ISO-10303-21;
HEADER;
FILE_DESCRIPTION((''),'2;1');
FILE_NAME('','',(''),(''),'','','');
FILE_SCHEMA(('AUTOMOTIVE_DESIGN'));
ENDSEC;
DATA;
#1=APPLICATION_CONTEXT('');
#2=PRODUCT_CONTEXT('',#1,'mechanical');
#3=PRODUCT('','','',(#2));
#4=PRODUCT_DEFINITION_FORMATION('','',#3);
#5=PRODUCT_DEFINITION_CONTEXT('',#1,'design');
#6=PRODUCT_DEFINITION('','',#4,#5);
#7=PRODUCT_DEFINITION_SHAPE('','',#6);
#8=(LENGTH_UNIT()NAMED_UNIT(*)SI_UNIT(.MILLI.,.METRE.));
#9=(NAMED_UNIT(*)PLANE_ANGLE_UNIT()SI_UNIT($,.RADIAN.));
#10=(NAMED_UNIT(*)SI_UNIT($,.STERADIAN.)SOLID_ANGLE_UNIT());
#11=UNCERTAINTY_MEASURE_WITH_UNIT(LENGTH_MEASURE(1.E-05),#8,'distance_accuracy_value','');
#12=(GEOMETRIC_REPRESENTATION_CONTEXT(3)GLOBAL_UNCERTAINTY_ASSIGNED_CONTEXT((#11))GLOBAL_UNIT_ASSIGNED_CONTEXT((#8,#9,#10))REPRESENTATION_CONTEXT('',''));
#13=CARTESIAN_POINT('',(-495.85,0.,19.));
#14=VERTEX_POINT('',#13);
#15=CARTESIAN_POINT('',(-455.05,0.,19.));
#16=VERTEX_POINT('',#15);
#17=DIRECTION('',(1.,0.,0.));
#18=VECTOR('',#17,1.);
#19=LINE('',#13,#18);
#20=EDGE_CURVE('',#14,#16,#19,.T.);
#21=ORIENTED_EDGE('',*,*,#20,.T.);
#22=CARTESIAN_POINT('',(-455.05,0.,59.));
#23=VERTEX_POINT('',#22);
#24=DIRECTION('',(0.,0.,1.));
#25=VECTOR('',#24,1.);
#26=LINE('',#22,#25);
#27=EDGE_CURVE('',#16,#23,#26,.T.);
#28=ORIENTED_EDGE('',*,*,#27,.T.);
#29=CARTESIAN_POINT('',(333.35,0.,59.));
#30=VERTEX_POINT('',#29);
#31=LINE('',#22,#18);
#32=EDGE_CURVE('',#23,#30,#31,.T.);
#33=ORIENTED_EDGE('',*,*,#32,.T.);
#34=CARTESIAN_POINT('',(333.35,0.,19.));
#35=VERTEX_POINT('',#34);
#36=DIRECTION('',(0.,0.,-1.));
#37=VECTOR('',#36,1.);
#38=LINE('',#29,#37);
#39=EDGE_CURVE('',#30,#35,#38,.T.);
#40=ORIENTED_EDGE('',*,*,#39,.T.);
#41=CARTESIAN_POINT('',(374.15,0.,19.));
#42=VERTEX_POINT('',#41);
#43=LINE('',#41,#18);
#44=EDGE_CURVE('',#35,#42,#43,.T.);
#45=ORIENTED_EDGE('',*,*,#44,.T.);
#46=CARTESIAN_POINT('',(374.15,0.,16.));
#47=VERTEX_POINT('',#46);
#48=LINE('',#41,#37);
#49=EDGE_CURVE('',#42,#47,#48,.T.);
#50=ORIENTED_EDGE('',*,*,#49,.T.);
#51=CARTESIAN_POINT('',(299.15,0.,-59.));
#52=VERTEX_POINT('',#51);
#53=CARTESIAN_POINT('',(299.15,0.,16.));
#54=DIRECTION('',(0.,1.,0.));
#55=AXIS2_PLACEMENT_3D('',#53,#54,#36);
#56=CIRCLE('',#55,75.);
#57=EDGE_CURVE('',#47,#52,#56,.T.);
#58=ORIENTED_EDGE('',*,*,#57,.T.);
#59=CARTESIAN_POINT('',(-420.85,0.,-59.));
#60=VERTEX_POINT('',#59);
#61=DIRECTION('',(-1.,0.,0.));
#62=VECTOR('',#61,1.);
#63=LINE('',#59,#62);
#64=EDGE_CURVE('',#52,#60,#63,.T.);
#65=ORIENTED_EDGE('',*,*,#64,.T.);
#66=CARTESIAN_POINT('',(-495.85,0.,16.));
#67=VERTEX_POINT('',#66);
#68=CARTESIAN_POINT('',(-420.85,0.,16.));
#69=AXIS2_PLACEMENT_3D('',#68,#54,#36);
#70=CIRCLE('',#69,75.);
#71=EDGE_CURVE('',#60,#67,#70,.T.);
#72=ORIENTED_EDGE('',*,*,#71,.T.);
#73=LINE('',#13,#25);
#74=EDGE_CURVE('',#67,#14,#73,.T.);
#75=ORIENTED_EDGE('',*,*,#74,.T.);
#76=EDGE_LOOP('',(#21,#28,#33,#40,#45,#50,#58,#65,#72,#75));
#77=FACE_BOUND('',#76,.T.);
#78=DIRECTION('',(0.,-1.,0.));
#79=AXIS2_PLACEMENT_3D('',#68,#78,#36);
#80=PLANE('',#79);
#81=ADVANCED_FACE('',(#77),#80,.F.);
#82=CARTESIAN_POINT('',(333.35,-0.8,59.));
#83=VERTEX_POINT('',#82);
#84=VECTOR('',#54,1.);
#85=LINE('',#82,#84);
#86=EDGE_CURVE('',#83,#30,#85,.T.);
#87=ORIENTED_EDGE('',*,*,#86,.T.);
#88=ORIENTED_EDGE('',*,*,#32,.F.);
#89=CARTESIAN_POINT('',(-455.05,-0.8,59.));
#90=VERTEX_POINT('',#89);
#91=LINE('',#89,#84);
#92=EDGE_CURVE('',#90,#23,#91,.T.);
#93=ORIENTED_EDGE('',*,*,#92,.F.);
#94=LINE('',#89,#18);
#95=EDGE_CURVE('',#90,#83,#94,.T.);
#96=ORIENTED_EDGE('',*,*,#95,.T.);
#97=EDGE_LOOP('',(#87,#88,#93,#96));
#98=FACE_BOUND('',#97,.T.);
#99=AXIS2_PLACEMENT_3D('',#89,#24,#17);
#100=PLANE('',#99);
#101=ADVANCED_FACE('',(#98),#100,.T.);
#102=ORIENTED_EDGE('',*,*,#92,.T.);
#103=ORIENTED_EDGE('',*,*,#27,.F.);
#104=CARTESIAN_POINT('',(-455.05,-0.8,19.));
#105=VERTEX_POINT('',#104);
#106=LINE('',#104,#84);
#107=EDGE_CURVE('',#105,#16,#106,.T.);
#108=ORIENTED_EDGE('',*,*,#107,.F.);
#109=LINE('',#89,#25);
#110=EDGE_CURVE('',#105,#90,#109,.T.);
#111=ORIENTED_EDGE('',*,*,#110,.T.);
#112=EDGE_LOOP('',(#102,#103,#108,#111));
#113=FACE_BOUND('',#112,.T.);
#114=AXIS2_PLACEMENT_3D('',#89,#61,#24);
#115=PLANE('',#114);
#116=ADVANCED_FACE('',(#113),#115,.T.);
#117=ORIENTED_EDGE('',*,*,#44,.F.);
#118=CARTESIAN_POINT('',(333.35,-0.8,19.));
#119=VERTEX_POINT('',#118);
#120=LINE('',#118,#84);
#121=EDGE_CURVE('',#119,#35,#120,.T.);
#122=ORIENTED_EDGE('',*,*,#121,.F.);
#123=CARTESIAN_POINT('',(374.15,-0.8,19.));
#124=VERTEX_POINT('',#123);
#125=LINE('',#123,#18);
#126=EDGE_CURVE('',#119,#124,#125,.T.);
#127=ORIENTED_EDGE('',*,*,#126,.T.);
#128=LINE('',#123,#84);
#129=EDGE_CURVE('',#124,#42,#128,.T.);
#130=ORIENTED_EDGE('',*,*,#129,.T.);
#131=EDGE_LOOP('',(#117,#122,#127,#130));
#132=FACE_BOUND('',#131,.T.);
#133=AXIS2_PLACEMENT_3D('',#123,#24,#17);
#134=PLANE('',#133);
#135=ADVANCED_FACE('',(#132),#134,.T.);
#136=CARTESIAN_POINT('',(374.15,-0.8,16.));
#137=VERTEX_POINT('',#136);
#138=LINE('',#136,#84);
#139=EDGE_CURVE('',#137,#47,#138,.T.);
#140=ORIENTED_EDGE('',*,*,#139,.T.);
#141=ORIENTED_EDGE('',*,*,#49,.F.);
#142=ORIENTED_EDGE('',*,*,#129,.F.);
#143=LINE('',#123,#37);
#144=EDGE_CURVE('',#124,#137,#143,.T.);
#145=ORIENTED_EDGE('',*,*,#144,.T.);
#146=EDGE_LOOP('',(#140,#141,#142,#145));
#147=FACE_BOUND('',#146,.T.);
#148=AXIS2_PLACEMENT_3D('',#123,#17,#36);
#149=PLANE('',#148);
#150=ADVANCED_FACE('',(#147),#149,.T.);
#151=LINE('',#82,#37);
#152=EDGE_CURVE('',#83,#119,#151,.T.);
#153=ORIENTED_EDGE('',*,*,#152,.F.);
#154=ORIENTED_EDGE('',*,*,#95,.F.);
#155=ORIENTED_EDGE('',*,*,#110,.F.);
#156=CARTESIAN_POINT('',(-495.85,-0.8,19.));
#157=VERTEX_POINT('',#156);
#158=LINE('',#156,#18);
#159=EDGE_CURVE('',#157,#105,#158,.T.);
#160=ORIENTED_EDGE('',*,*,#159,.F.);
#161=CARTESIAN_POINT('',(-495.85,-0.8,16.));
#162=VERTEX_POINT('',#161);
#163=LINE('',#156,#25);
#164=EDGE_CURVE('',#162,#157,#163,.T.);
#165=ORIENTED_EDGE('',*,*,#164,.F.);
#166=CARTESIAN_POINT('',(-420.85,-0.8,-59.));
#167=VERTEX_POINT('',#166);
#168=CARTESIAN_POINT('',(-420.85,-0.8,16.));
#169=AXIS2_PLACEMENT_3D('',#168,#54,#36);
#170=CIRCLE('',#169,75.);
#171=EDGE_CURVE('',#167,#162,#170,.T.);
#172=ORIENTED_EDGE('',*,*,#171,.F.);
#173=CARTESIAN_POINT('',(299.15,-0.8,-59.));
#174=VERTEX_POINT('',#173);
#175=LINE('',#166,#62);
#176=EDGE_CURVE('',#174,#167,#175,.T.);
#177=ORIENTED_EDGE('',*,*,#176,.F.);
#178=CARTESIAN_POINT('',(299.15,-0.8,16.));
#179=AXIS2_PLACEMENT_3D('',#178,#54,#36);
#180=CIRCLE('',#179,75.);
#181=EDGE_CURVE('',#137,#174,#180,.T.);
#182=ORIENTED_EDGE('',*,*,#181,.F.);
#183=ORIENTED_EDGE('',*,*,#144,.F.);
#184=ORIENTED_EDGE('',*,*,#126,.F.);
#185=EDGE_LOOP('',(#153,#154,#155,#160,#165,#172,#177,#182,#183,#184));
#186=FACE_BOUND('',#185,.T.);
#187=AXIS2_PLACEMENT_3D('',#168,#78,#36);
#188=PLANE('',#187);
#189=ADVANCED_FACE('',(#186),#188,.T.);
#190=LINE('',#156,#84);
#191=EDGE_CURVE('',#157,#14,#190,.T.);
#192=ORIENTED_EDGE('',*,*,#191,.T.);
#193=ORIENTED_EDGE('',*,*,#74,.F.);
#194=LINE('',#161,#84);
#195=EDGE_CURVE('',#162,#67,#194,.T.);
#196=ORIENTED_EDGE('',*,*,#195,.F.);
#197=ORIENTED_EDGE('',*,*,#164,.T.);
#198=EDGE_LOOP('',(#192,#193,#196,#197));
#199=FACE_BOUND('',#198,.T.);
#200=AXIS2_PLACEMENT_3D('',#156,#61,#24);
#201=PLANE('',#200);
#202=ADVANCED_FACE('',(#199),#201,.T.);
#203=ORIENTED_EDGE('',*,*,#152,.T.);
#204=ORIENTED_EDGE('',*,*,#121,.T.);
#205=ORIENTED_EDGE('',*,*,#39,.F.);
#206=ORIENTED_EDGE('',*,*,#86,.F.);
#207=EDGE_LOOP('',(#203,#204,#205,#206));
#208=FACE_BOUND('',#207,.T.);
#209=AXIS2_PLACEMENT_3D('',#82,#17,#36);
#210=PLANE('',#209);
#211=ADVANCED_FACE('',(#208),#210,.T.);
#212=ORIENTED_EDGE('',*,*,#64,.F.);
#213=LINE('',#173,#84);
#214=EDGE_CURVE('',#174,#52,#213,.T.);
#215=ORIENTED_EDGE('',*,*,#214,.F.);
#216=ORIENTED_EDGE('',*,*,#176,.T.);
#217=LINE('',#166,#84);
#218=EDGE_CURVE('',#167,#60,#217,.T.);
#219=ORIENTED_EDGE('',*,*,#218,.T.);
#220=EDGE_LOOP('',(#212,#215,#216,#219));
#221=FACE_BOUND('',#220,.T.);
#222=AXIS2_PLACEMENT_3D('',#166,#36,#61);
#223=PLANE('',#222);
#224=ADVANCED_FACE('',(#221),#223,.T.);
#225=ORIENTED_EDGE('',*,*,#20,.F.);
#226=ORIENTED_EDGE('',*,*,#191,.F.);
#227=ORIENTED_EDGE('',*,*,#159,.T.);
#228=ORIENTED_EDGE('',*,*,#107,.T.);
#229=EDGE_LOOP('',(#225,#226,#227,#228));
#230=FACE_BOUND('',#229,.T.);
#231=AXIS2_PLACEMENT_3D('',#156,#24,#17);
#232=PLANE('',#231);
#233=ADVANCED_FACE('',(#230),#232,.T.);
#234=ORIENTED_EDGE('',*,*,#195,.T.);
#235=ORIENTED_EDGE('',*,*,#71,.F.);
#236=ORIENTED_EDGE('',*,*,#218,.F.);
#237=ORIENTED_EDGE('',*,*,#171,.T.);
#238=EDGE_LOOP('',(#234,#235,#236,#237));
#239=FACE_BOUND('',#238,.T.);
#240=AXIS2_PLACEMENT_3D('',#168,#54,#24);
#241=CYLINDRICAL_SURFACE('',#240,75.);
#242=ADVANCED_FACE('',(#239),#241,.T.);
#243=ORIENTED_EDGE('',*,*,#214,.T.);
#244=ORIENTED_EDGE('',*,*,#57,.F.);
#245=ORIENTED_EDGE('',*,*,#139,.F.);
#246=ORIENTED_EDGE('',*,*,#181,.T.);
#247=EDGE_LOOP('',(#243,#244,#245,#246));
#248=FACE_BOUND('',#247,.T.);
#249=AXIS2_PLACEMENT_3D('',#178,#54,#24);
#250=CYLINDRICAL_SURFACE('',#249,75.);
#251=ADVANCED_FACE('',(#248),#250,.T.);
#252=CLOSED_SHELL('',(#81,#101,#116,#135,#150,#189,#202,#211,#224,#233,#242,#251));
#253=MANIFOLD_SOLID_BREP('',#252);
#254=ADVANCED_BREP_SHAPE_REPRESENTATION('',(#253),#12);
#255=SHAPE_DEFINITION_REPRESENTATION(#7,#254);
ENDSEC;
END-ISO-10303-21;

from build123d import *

# Parameters (mm, degrees)
BASE_FLANGE1_DEPTH = 0.8


# Sheet-metal steps are written as plain solids
with BuildPart() as part:
    # Sketch1 → Base-Flange1 (new body)
    with BuildSketch(Plane(origin=(0, 0, 0), x_dir=(1, 0, 0), z_dir=(0, 1, 0))):
        with BuildLine():
            Line((-455.05, -59), (333.35, -59))
            Line((333.35, -59), (333.35, -19))
            Line((333.35, -19), (374.15, -19))
            Line((374.15, -19), (374.15, -16))
            ThreePointArc((374.15, -16), (352.183008589, 37.033008589), (299.15, 59))
            Line((299.15, 59), (-420.85, 59))
            ThreePointArc((-420.85, 59), (-473.883008589, 37.033008589), (-495.85, -16))
            Line((-495.85, -16), (-495.85, -19))
            Line((-495.85, -19), (-455.05, -19))
            Line((-455.05, -19), (-455.05, -59))
        make_face()
    extrude(amount=-BASE_FLANGE1_DEPTH)


solid = part.part
